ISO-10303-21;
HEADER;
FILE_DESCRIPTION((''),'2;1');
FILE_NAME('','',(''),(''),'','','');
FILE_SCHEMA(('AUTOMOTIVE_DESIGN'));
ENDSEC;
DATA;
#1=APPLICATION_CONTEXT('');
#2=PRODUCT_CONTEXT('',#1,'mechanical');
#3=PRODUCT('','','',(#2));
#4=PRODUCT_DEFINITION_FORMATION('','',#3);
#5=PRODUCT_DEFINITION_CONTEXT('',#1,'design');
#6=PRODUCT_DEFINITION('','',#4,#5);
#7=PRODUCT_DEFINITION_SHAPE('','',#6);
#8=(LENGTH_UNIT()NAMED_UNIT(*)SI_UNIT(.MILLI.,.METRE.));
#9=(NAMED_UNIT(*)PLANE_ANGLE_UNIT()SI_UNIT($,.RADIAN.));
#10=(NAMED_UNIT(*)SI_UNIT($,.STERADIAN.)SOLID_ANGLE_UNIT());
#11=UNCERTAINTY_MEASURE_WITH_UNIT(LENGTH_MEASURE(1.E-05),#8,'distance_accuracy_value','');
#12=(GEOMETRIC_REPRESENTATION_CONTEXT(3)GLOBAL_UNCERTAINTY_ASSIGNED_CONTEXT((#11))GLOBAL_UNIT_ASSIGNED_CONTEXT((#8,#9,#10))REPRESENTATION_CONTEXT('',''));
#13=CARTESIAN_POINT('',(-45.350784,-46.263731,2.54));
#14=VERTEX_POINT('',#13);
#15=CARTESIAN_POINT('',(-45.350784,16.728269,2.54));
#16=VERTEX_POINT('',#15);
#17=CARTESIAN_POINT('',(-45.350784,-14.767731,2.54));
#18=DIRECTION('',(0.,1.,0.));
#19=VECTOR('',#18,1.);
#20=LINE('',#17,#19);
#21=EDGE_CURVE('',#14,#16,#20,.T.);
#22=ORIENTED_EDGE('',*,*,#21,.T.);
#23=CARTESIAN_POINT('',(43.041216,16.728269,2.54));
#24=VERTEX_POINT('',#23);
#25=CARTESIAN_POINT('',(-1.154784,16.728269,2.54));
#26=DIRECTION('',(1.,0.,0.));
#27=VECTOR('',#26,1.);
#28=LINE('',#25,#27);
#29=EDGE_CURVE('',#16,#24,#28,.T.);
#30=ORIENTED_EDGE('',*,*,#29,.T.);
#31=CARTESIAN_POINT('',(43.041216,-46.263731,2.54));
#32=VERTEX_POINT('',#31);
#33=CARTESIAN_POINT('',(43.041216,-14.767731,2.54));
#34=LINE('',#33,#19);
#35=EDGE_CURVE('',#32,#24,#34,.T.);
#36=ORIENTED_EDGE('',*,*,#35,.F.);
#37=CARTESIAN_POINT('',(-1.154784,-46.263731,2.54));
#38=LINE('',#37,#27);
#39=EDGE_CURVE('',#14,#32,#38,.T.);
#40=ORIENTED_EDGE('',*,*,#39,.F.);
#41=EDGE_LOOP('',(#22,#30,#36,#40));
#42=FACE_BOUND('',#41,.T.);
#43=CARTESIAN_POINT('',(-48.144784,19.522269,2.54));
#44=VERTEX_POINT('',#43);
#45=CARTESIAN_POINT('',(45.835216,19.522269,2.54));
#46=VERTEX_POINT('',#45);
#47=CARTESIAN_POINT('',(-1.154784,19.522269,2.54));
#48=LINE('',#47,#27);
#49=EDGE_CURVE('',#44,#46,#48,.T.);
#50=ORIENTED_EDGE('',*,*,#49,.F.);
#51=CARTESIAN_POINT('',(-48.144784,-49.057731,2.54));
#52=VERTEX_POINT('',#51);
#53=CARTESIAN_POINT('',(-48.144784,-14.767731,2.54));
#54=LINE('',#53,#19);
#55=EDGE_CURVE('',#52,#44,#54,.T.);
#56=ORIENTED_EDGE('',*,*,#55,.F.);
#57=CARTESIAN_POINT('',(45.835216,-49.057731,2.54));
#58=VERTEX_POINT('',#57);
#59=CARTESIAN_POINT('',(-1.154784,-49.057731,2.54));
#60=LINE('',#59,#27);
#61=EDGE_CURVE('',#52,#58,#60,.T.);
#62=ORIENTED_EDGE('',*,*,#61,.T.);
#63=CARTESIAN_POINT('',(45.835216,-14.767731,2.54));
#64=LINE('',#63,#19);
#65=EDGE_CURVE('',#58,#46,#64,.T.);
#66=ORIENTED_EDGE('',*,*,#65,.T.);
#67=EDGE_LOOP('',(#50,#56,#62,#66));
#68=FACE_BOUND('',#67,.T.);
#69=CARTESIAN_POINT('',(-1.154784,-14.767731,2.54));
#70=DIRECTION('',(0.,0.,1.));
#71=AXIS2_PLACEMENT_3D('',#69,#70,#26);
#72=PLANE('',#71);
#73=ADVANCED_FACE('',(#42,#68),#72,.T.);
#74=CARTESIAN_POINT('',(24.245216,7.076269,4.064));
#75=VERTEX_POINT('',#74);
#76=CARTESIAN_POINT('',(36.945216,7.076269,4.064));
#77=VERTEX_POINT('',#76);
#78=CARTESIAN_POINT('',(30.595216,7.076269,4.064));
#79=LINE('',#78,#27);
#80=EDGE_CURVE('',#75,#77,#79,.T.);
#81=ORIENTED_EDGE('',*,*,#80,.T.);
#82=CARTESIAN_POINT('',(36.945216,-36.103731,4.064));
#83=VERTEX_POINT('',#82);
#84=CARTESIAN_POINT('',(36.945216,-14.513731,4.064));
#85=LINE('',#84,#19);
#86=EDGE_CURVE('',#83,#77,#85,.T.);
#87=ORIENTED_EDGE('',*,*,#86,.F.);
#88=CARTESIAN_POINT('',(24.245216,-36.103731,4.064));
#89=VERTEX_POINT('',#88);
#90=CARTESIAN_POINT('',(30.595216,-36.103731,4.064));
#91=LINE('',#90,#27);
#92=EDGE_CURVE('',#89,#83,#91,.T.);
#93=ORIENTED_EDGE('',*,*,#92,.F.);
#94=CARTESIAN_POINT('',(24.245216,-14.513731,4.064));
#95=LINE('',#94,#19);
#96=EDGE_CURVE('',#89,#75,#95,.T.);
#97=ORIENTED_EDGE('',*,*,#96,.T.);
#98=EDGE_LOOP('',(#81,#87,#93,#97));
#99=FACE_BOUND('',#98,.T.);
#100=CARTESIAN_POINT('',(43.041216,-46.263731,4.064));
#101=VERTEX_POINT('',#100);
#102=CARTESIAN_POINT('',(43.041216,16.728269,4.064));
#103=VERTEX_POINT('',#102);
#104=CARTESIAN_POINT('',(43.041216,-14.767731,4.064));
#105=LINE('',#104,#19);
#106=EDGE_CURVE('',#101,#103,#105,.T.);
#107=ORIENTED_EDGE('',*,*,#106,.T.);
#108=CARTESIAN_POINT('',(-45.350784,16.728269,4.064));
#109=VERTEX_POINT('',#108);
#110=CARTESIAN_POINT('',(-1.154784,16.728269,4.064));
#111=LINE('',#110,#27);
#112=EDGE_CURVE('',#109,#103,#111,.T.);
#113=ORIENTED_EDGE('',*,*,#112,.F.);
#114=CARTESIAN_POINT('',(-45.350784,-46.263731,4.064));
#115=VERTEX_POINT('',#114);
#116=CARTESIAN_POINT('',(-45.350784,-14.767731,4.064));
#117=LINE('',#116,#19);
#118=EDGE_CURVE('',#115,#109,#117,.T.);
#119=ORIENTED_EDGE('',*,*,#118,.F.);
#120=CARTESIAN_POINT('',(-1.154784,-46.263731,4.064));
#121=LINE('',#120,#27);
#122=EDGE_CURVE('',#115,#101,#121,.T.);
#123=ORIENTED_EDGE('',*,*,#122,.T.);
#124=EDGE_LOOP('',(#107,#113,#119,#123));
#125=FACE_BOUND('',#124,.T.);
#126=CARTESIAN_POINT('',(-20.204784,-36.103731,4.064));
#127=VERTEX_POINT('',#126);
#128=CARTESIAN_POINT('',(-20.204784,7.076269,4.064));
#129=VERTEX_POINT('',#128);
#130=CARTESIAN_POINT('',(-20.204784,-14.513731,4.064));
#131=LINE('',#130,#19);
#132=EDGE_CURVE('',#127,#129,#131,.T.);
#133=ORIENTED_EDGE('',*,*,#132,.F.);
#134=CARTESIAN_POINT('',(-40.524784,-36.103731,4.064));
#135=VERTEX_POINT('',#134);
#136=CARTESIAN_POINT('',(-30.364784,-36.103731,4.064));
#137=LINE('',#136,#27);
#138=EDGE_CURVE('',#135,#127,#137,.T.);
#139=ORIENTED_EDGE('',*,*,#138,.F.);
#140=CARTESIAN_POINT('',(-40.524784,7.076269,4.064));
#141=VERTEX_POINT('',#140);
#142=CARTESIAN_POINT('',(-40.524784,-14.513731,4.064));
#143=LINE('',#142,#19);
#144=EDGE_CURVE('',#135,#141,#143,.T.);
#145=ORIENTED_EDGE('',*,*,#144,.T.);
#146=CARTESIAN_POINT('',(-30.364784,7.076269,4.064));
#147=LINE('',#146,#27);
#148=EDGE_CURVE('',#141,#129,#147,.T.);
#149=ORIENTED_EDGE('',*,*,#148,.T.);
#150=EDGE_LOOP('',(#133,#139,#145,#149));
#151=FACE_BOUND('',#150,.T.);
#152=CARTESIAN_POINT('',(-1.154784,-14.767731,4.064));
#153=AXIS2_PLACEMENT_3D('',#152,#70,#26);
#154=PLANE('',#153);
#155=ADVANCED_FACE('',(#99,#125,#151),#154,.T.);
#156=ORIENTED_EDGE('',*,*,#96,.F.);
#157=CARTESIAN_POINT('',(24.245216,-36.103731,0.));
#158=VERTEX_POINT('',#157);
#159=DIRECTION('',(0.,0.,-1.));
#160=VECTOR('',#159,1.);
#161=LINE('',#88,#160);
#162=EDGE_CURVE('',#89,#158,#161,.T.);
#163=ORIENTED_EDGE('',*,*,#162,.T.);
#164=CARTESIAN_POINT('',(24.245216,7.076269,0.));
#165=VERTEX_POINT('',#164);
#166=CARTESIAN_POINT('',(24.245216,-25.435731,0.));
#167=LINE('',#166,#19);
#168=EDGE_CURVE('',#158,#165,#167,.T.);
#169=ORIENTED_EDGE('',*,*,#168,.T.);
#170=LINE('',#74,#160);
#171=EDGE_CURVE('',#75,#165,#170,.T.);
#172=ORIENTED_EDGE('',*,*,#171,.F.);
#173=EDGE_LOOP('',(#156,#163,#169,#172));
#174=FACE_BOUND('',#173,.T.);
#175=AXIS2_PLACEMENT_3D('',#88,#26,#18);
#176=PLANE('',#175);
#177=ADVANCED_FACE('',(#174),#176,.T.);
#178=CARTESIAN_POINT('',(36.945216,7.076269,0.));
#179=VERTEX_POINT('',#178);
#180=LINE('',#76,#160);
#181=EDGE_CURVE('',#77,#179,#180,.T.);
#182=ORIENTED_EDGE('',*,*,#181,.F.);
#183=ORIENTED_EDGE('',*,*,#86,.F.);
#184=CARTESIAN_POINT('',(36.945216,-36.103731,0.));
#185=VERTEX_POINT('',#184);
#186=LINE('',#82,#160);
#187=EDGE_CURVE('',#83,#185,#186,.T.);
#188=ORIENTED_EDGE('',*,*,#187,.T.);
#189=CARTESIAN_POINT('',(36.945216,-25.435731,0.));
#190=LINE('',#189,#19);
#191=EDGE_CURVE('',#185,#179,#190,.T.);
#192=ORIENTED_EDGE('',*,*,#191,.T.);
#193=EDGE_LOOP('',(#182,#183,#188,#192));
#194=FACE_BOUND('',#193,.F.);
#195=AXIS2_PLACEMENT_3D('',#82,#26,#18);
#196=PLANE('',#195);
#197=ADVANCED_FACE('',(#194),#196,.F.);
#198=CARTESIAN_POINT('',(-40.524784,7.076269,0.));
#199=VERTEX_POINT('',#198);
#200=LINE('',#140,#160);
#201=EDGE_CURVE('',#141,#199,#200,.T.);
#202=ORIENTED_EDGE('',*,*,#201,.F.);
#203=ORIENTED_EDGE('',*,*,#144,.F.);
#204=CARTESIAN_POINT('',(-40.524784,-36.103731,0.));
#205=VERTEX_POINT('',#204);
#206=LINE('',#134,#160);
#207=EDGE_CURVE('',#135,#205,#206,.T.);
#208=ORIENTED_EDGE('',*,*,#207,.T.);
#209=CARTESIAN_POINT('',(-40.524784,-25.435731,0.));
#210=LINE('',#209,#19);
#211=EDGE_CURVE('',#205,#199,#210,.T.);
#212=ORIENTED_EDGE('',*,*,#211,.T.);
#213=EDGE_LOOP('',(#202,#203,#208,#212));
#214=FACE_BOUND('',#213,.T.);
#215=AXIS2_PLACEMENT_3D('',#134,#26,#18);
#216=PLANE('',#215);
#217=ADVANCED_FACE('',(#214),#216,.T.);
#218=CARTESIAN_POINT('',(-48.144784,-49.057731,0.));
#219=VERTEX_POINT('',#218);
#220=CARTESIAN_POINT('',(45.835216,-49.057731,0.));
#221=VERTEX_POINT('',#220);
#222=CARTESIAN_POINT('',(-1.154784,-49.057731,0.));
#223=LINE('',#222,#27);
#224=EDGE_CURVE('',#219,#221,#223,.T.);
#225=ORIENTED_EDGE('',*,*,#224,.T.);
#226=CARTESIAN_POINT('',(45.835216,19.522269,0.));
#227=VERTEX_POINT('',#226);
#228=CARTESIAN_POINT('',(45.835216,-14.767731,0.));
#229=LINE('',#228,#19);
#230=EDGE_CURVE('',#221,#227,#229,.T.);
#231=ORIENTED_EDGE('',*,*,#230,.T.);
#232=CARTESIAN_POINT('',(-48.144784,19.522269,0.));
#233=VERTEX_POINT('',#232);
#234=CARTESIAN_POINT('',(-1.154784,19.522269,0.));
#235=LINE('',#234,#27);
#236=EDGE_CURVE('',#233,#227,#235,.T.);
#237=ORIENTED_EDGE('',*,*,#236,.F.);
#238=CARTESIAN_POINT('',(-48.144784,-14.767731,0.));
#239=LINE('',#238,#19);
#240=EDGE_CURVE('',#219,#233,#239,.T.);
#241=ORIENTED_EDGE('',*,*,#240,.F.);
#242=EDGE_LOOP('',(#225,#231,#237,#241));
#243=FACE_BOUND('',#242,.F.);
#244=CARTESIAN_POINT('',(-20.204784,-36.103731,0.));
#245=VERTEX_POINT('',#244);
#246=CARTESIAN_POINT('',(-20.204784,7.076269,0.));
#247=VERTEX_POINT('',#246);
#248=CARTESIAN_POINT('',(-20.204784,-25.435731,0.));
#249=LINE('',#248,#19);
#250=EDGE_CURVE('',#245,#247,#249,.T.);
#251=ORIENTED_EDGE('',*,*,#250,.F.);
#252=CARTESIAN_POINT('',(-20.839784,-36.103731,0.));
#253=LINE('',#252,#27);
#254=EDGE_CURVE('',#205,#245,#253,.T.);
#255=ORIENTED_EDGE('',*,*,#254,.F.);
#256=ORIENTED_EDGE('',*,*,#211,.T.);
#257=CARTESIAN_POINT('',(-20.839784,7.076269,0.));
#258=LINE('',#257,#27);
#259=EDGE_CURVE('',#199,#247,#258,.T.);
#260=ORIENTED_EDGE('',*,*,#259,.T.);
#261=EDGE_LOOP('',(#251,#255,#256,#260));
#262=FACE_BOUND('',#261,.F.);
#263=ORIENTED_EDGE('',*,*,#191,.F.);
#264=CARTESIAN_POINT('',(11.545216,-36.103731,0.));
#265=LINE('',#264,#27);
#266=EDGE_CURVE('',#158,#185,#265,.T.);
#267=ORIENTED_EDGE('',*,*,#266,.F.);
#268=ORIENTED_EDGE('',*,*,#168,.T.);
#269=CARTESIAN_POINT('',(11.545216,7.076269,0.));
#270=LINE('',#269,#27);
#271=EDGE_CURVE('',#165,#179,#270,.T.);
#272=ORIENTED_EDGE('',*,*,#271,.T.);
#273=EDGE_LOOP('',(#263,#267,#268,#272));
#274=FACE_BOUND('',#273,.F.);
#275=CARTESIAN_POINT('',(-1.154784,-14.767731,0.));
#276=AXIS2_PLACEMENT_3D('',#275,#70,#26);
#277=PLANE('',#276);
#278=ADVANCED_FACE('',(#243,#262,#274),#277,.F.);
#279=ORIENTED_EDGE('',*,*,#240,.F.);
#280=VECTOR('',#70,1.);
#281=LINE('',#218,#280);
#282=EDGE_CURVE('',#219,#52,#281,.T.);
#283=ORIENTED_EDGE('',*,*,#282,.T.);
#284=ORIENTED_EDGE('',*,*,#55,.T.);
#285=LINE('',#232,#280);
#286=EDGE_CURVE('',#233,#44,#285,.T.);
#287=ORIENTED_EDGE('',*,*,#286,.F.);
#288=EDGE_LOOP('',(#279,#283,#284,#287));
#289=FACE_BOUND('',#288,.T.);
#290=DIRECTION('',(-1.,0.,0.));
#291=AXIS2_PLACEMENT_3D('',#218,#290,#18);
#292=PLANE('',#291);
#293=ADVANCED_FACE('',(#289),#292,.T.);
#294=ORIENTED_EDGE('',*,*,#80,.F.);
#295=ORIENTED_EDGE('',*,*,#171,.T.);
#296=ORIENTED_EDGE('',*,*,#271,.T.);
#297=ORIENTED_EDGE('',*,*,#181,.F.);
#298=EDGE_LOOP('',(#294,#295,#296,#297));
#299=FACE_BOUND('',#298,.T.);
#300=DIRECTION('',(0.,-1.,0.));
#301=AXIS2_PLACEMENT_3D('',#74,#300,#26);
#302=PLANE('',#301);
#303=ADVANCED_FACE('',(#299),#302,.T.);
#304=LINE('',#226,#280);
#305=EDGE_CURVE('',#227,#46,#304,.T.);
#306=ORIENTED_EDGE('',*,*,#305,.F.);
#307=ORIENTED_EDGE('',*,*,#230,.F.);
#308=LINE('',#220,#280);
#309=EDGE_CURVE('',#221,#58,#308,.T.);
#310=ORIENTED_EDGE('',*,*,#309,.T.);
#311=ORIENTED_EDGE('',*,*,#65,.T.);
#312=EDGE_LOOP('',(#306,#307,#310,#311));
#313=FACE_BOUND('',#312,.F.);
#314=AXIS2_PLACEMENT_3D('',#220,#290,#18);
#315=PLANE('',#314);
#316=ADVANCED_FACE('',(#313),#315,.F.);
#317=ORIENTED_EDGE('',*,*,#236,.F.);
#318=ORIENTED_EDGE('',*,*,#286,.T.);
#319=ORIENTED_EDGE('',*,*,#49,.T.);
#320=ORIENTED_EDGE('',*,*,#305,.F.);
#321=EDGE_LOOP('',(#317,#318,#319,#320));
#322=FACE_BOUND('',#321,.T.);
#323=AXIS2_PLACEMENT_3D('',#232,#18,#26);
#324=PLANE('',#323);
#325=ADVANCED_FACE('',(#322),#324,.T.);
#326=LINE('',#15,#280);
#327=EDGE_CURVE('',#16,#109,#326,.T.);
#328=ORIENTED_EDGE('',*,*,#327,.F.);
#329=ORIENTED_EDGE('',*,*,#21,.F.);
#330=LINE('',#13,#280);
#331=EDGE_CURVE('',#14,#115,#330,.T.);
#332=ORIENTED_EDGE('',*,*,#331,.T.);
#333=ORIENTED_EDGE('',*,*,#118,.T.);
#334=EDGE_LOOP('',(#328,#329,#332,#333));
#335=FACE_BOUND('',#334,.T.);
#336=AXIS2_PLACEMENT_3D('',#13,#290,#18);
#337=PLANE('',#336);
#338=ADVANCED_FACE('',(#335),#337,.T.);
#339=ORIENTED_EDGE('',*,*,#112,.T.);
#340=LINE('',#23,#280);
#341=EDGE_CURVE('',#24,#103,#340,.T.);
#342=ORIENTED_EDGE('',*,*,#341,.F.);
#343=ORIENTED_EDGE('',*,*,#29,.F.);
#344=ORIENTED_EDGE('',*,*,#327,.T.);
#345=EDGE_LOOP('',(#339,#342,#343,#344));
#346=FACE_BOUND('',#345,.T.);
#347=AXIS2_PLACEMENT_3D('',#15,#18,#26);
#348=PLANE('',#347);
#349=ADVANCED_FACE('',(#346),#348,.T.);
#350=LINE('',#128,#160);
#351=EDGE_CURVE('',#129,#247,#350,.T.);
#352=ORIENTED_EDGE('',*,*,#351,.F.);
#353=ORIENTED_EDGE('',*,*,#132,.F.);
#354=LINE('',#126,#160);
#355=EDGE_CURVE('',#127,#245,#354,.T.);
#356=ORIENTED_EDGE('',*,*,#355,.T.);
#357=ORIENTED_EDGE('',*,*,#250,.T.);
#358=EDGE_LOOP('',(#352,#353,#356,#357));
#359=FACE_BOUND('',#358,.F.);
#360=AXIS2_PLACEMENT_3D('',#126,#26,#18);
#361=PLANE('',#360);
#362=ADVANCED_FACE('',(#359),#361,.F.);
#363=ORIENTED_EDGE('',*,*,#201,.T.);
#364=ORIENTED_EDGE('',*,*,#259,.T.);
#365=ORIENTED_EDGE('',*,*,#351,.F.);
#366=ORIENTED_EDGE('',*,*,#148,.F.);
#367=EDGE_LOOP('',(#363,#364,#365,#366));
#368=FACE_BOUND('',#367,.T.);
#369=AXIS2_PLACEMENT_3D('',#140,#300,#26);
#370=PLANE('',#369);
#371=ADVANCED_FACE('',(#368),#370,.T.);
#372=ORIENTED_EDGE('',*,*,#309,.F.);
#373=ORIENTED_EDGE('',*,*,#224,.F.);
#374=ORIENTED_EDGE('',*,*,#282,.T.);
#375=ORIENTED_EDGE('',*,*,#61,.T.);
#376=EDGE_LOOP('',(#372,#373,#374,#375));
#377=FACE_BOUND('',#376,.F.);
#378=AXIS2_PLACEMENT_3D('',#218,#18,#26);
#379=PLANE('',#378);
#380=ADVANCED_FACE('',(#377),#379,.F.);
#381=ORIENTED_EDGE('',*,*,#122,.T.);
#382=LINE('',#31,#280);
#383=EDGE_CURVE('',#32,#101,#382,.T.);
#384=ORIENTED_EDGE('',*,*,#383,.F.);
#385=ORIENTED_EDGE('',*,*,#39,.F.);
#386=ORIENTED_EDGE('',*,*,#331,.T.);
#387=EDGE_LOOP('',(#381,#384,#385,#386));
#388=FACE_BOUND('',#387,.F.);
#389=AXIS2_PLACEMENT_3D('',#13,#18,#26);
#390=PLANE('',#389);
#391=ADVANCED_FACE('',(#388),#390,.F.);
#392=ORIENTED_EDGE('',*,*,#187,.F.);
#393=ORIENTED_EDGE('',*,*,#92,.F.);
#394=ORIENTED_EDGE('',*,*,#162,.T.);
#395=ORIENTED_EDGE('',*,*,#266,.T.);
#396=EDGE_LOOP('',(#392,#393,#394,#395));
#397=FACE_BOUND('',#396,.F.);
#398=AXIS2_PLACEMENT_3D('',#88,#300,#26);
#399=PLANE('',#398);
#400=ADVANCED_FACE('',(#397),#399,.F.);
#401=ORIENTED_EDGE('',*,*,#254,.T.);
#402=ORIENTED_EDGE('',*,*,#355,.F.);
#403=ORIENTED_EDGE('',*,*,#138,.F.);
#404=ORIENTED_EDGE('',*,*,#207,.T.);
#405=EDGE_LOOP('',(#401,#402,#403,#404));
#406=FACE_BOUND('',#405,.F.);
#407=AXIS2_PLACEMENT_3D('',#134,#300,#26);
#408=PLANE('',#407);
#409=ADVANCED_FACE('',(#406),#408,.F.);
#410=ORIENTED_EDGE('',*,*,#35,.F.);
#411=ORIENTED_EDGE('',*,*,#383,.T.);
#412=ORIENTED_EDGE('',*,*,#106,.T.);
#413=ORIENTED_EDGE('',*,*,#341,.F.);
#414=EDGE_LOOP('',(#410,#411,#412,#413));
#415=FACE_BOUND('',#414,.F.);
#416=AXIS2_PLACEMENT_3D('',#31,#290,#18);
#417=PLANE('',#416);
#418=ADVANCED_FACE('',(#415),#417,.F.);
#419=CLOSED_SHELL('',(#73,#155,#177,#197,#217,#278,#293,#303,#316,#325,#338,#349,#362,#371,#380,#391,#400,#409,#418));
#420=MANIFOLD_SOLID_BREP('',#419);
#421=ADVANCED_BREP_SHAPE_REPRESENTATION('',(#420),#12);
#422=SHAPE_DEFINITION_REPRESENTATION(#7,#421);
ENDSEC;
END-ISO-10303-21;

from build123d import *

# Parameters (mm, degrees)
F0_W     = 93.98
F0_H     = 68.58
F1_DEPTH = 2.54
F2_W     = 88.392
F2_H     = 62.992
F3_DEPTH = 1.524
F4_W     = 12.7
F4_H     = 43.18
F5_DEPTH = 4.065
F6_W     = 20.32
F6_H     = 43.18
F7_DEPTH = 4.065


# Not quite as in the source:
# - a feature names something its author has since deleted; it is built from what else it names


with BuildPart() as f1:
    # F0 (on Top) → F1 (new body)
    with BuildSketch(Plane.XY):
        with Locations((-1.1547841132, -14.7677313863)):
            Rectangle(F0_W, F0_H)
    extrude(amount=F1_DEPTH)

    # F2 (on face) → F3 (join)
    with BuildSketch(Plane.XY.offset(2.54)):
        with Locations((-1.1547841132, -14.7677313863)):
            Rectangle(F2_W, F2_H)
    extrude(amount=F3_DEPTH)

    # F4 (on face) → F5 (cut, through all)
    with BuildSketch(Plane.XY.offset(4.064)):
        with Locations((30.5952158868, -14.5137313863)):
            Rectangle(F4_W, F4_H)
    extrude(amount=-F5_DEPTH, mode=Mode.SUBTRACT)

    # F6 (on face) → F7 (cut, through all)
    with BuildSketch(Plane.XY.offset(4.064)):
        with Locations((-30.3647841132, -14.5137313863)):
            Rectangle(F6_W, F6_H)
    extrude(amount=-F7_DEPTH, mode=Mode.SUBTRACT)


solid = f1.part
